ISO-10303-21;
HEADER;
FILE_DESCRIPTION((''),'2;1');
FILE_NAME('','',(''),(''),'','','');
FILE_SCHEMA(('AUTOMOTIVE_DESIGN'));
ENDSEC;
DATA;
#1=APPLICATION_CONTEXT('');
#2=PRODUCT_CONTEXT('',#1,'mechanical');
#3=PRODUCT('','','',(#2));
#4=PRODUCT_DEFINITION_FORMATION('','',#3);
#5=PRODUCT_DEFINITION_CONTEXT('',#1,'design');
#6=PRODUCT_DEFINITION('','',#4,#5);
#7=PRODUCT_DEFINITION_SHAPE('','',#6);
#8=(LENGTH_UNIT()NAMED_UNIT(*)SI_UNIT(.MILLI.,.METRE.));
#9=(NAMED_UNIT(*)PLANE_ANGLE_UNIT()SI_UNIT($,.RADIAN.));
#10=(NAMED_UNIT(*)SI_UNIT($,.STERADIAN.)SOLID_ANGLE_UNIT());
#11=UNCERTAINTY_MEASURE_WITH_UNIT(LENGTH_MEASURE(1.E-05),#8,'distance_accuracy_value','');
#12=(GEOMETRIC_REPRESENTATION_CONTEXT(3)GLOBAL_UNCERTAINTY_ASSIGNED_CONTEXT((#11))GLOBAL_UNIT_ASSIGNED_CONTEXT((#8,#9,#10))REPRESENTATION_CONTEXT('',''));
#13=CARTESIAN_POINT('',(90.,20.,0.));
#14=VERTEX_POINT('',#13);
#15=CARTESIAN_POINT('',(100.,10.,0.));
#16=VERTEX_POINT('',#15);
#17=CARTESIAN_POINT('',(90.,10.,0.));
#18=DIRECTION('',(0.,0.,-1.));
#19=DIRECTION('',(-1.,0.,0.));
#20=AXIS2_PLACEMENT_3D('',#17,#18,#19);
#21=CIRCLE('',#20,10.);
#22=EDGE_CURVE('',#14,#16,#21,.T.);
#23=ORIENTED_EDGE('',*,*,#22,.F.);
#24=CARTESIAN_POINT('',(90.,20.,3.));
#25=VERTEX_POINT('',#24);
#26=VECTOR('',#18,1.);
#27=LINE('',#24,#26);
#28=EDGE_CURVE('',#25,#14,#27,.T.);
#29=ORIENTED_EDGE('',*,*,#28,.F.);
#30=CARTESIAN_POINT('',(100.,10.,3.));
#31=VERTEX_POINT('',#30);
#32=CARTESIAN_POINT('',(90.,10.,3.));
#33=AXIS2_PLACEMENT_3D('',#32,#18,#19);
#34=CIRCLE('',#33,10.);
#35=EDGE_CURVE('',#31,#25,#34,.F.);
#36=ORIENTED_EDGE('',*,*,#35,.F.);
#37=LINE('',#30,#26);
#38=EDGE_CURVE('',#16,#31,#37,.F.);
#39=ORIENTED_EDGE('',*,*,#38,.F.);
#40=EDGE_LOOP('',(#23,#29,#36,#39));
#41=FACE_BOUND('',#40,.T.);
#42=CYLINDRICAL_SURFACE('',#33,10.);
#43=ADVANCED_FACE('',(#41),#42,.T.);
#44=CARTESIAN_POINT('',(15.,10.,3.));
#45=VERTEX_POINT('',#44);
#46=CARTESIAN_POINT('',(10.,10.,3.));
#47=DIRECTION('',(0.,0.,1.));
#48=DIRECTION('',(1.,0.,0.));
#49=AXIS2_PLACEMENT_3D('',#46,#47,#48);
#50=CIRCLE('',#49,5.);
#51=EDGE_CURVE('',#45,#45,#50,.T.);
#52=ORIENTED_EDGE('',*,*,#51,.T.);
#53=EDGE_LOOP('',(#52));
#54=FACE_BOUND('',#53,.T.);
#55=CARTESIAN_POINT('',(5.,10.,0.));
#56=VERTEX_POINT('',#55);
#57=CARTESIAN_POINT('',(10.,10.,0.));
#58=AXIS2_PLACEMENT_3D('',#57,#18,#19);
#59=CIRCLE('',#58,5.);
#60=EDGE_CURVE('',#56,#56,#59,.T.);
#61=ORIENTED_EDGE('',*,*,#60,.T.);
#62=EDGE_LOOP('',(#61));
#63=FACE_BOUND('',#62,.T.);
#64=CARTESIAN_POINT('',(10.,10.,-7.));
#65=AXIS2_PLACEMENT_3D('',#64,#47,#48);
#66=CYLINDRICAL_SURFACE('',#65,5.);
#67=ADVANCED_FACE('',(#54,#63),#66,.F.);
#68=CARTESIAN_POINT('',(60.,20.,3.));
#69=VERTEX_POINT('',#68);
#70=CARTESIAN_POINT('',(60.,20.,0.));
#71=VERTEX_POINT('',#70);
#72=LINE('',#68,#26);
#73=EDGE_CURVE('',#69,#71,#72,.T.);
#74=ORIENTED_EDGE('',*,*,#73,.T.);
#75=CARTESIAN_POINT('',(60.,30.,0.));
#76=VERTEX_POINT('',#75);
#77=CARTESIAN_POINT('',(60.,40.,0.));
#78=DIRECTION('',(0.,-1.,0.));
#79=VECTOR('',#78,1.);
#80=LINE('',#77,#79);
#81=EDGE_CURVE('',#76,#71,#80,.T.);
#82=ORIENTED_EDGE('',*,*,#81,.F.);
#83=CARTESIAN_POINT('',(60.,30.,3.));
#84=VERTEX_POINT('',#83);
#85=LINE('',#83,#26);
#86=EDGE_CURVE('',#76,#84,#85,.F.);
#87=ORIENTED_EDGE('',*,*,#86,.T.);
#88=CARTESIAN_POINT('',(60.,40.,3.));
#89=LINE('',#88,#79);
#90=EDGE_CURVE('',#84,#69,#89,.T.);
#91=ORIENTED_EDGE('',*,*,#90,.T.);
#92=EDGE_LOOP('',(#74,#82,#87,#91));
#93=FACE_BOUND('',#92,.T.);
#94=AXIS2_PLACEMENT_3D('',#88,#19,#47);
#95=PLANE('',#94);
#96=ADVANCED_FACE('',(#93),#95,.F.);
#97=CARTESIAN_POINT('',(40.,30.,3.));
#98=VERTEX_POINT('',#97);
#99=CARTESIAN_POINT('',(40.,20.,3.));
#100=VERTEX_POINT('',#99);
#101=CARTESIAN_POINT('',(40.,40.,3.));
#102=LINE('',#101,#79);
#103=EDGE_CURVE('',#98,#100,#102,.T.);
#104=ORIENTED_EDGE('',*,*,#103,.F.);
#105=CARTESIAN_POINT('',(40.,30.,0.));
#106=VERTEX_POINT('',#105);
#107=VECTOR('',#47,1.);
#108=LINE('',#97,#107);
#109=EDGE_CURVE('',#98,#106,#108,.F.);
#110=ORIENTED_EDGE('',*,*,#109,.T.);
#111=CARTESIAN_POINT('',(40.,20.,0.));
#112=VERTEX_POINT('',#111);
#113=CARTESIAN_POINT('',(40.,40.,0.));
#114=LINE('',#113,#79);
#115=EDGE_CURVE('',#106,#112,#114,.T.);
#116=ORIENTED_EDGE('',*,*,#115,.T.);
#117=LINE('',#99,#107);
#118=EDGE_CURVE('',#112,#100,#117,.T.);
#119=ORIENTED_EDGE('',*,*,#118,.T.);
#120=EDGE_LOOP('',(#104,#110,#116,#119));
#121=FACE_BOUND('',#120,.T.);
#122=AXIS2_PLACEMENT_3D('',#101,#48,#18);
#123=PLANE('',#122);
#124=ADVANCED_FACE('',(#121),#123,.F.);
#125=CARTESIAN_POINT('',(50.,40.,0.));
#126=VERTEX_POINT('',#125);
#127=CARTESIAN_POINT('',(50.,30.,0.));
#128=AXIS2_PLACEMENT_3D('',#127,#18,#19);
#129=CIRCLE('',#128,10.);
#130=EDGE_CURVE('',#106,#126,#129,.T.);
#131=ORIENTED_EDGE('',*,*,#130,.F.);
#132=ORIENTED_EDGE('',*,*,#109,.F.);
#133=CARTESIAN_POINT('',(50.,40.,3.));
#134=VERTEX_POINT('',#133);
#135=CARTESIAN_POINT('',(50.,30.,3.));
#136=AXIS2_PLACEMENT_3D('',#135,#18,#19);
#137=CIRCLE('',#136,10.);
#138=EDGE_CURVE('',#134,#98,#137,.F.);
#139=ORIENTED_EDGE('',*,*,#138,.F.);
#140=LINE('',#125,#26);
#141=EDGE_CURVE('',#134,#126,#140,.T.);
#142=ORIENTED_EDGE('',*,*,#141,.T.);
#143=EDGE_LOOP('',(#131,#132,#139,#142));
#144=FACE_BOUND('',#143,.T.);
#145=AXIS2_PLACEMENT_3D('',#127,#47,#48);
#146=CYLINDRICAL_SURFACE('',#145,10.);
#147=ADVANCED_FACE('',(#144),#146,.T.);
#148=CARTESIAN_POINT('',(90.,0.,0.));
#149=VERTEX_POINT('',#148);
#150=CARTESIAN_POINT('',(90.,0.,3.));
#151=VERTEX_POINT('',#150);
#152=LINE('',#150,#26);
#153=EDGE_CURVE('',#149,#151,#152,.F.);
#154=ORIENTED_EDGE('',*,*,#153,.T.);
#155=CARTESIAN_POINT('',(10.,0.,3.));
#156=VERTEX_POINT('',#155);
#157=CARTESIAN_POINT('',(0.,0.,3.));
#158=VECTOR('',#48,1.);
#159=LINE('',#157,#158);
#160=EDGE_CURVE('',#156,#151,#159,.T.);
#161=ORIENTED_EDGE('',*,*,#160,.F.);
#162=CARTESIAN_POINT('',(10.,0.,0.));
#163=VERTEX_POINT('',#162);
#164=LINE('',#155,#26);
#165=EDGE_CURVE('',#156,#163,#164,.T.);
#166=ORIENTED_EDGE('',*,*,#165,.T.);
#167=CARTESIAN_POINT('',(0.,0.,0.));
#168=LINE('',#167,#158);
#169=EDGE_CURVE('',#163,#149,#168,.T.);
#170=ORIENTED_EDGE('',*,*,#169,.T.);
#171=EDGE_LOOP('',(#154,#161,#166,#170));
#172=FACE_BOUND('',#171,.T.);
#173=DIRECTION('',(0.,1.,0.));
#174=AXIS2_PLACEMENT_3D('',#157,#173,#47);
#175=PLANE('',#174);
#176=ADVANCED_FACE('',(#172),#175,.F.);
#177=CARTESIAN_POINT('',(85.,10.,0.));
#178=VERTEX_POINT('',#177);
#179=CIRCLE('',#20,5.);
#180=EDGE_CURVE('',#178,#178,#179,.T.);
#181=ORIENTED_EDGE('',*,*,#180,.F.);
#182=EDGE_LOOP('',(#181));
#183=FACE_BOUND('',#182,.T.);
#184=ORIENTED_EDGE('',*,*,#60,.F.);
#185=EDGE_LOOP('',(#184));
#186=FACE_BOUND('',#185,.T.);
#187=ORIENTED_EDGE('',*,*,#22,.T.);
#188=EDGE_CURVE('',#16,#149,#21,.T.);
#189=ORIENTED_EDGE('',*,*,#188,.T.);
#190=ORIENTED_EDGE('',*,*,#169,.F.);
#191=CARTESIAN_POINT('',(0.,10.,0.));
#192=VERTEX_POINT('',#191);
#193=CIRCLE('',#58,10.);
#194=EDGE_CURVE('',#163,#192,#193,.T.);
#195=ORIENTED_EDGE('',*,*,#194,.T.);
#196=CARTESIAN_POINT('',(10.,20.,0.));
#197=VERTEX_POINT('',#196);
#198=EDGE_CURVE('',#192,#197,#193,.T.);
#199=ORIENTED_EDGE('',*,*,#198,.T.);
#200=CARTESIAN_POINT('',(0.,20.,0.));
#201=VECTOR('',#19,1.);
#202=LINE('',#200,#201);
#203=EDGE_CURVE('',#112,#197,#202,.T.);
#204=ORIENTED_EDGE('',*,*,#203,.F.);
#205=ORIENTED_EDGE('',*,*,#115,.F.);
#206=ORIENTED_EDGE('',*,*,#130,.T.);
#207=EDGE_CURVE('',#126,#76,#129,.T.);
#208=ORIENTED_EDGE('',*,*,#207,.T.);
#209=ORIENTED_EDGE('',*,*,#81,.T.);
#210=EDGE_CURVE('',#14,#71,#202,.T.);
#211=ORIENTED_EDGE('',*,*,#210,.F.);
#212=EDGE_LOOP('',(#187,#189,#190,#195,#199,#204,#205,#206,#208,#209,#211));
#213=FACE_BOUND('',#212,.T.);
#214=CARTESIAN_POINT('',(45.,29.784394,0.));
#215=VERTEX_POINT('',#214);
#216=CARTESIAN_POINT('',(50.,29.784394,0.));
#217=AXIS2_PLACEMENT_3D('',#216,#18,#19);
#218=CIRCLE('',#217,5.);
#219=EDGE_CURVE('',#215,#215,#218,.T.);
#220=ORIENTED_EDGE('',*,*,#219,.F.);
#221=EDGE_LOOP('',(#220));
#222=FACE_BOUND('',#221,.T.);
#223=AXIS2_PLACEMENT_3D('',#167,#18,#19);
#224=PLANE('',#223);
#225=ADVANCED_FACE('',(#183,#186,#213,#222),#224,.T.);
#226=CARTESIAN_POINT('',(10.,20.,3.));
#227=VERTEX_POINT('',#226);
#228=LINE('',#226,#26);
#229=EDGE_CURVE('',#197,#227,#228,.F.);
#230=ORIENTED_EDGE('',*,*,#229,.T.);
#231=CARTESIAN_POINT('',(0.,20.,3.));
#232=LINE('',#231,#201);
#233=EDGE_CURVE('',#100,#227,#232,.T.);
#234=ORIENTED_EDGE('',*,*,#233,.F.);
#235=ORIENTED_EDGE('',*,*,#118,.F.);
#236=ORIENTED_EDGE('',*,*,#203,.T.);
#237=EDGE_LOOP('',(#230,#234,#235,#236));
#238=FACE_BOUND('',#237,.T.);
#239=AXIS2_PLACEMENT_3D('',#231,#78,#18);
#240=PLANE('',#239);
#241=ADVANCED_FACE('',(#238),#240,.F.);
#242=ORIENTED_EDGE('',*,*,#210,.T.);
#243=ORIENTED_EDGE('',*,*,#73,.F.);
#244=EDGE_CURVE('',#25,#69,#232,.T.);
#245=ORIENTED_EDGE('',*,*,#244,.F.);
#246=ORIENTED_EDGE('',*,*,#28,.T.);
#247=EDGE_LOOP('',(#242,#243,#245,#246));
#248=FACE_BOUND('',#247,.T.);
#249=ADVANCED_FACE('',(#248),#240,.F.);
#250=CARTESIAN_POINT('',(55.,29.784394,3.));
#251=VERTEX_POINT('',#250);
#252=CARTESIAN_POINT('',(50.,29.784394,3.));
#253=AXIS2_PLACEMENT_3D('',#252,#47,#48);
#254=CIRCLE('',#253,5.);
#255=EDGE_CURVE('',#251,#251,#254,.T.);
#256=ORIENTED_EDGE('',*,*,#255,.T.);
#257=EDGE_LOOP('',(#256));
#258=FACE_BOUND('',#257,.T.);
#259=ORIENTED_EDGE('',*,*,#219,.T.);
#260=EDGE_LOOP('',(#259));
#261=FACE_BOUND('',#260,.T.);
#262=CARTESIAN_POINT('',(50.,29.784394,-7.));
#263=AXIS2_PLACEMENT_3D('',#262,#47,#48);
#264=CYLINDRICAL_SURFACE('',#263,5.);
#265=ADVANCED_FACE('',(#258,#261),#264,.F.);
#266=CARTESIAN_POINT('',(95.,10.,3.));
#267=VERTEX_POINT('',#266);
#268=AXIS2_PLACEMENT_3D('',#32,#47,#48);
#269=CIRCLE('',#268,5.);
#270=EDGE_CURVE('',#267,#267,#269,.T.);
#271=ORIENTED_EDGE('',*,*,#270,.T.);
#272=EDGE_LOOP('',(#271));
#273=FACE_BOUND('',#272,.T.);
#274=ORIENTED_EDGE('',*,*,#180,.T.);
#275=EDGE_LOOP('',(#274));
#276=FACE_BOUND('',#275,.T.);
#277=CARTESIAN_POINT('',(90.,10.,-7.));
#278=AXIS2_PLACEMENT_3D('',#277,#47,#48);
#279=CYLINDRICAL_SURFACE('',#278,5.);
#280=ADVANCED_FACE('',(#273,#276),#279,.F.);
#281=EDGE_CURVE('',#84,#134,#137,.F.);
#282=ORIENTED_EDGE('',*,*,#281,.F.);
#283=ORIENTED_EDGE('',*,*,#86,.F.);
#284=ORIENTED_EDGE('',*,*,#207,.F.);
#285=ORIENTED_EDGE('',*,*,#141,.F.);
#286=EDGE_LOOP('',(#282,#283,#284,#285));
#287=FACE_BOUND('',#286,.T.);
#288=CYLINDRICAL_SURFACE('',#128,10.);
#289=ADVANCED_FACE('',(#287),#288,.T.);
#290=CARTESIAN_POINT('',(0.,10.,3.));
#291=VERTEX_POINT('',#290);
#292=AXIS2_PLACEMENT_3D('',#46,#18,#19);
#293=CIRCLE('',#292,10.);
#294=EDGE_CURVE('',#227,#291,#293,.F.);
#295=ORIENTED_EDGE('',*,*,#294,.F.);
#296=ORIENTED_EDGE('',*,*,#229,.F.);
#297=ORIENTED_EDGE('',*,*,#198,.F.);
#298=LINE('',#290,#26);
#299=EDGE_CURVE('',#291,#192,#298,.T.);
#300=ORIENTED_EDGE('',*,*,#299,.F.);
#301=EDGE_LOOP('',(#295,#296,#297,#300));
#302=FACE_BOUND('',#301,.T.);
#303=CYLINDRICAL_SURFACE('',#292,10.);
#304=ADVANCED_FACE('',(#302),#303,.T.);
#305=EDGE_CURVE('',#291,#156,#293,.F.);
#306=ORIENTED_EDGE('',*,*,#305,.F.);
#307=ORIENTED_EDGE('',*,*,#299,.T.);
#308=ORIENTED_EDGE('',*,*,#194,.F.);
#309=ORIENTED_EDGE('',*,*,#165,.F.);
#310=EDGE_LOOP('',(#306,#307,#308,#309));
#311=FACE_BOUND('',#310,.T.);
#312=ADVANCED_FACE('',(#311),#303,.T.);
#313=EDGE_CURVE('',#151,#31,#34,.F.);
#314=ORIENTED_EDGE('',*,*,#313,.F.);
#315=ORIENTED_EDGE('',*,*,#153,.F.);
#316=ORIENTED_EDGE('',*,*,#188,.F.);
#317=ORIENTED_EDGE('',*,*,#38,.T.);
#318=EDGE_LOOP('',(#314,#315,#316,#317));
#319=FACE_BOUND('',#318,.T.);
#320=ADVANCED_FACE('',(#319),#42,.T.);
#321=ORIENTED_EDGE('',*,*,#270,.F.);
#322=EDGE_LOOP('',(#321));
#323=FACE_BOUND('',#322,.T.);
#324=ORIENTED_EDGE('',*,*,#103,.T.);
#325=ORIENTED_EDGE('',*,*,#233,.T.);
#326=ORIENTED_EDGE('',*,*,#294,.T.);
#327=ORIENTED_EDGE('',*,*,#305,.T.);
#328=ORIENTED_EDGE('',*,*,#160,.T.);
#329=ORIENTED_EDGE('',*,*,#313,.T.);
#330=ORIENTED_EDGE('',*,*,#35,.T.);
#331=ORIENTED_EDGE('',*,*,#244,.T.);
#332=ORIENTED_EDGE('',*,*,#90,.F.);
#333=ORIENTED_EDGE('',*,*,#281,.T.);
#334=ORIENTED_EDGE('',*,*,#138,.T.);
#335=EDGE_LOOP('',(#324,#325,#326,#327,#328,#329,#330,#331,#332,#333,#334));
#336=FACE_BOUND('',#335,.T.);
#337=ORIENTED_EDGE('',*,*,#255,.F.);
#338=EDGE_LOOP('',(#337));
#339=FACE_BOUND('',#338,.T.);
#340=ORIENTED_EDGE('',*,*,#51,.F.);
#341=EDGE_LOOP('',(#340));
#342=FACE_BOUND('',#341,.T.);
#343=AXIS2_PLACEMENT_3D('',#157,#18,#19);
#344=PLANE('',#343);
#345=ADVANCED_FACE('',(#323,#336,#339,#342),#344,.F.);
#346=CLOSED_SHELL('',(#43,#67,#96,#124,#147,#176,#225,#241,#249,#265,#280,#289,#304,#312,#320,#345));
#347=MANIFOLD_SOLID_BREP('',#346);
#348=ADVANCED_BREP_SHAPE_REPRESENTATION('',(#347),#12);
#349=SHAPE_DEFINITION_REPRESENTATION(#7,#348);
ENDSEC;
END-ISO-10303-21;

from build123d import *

# Parameters (mm, degrees)
SKETCH_1_W          = 100
SKETCH_1_H          = 20
EXTRUDE_1_DEPTH     = 3
FILLET_1_R          = 10
SKETCH_4_W          = 20
SKETCH_4_H          = 3
EXTRUDE_2_DEPTH     = 20
FILLET_2_R          = 10
SKETCH_5_R          = 5
CUT_EXTRUDE_1_DEPTH = 10
SKETCH_5_3_R        = 5
CUT_EXTRUDE_2_DEPTH = 10


with BuildPart() as part:
    # ｽｹｯﾁ1 → ﾎﾞｽ - 押し出し1 (new body)
    with BuildSketch(Plane.XY):
        with Locations((50, 10)):
            Rectangle(SKETCH_1_W, SKETCH_1_H)
    extrude(amount=EXTRUDE_1_DEPTH)

    # ﾌｨﾚｯﾄ1
    fillet_1_edges = [part.edges().sort_by_distance(p)[0] for p in [
        (100, 0, 1.5),
        (100, 20, 1.5),
        (0, 0, 1.5),
        (0, 20, 1.5),
    ]]
    fillet(fillet_1_edges, radius=FILLET_1_R - 0.0001)  # a hair under: the kernel refuses the full size

    # ｽｹｯﾁ4 → ﾎﾞｽ - 押し出し2 (add)
    with BuildSketch(Plane(origin=(0, 20, 0), x_dir=(1, 0, 0), z_dir=(0, 1, 0))):
        with Locations((50, -1.5)):
            Rectangle(SKETCH_4_W, SKETCH_4_H)
    extrude(amount=EXTRUDE_2_DEPTH)

    # ﾌｨﾚｯﾄ2
    fillet_2_edges = [part.edges().sort_by_distance(p)[0] for p in [
        (40, 40, 1.5),
        (60, 40, 1.5),
    ]]
    fillet(fillet_2_edges, radius=FILLET_2_R - 0.0001)  # a hair under: the kernel refuses the full size

    # ｽｹｯﾁ5 → ｶｯﾄ - 押し出し1 (cut)
    with BuildSketch(Plane.XY.offset(3)):
        with Locations((10, 10)):
            Circle(SKETCH_5_R)
    extrude(amount=-CUT_EXTRUDE_1_DEPTH, mode=Mode.SUBTRACT)

    # ｽｹｯﾁ5<3> → ｶｯﾄ - 押し出し2 (cut)
    with BuildSketch(Plane.XY.offset(3)):
        with Locations((50, 29.784394475)):
            Circle(SKETCH_5_3_R)
        with Locations((10, 10)):
            Circle(SKETCH_5_3_R)
        with Locations((90, 10)):
            Circle(SKETCH_5_3_R)
    extrude(amount=-CUT_EXTRUDE_2_DEPTH, mode=Mode.SUBTRACT)


solid = part.part
